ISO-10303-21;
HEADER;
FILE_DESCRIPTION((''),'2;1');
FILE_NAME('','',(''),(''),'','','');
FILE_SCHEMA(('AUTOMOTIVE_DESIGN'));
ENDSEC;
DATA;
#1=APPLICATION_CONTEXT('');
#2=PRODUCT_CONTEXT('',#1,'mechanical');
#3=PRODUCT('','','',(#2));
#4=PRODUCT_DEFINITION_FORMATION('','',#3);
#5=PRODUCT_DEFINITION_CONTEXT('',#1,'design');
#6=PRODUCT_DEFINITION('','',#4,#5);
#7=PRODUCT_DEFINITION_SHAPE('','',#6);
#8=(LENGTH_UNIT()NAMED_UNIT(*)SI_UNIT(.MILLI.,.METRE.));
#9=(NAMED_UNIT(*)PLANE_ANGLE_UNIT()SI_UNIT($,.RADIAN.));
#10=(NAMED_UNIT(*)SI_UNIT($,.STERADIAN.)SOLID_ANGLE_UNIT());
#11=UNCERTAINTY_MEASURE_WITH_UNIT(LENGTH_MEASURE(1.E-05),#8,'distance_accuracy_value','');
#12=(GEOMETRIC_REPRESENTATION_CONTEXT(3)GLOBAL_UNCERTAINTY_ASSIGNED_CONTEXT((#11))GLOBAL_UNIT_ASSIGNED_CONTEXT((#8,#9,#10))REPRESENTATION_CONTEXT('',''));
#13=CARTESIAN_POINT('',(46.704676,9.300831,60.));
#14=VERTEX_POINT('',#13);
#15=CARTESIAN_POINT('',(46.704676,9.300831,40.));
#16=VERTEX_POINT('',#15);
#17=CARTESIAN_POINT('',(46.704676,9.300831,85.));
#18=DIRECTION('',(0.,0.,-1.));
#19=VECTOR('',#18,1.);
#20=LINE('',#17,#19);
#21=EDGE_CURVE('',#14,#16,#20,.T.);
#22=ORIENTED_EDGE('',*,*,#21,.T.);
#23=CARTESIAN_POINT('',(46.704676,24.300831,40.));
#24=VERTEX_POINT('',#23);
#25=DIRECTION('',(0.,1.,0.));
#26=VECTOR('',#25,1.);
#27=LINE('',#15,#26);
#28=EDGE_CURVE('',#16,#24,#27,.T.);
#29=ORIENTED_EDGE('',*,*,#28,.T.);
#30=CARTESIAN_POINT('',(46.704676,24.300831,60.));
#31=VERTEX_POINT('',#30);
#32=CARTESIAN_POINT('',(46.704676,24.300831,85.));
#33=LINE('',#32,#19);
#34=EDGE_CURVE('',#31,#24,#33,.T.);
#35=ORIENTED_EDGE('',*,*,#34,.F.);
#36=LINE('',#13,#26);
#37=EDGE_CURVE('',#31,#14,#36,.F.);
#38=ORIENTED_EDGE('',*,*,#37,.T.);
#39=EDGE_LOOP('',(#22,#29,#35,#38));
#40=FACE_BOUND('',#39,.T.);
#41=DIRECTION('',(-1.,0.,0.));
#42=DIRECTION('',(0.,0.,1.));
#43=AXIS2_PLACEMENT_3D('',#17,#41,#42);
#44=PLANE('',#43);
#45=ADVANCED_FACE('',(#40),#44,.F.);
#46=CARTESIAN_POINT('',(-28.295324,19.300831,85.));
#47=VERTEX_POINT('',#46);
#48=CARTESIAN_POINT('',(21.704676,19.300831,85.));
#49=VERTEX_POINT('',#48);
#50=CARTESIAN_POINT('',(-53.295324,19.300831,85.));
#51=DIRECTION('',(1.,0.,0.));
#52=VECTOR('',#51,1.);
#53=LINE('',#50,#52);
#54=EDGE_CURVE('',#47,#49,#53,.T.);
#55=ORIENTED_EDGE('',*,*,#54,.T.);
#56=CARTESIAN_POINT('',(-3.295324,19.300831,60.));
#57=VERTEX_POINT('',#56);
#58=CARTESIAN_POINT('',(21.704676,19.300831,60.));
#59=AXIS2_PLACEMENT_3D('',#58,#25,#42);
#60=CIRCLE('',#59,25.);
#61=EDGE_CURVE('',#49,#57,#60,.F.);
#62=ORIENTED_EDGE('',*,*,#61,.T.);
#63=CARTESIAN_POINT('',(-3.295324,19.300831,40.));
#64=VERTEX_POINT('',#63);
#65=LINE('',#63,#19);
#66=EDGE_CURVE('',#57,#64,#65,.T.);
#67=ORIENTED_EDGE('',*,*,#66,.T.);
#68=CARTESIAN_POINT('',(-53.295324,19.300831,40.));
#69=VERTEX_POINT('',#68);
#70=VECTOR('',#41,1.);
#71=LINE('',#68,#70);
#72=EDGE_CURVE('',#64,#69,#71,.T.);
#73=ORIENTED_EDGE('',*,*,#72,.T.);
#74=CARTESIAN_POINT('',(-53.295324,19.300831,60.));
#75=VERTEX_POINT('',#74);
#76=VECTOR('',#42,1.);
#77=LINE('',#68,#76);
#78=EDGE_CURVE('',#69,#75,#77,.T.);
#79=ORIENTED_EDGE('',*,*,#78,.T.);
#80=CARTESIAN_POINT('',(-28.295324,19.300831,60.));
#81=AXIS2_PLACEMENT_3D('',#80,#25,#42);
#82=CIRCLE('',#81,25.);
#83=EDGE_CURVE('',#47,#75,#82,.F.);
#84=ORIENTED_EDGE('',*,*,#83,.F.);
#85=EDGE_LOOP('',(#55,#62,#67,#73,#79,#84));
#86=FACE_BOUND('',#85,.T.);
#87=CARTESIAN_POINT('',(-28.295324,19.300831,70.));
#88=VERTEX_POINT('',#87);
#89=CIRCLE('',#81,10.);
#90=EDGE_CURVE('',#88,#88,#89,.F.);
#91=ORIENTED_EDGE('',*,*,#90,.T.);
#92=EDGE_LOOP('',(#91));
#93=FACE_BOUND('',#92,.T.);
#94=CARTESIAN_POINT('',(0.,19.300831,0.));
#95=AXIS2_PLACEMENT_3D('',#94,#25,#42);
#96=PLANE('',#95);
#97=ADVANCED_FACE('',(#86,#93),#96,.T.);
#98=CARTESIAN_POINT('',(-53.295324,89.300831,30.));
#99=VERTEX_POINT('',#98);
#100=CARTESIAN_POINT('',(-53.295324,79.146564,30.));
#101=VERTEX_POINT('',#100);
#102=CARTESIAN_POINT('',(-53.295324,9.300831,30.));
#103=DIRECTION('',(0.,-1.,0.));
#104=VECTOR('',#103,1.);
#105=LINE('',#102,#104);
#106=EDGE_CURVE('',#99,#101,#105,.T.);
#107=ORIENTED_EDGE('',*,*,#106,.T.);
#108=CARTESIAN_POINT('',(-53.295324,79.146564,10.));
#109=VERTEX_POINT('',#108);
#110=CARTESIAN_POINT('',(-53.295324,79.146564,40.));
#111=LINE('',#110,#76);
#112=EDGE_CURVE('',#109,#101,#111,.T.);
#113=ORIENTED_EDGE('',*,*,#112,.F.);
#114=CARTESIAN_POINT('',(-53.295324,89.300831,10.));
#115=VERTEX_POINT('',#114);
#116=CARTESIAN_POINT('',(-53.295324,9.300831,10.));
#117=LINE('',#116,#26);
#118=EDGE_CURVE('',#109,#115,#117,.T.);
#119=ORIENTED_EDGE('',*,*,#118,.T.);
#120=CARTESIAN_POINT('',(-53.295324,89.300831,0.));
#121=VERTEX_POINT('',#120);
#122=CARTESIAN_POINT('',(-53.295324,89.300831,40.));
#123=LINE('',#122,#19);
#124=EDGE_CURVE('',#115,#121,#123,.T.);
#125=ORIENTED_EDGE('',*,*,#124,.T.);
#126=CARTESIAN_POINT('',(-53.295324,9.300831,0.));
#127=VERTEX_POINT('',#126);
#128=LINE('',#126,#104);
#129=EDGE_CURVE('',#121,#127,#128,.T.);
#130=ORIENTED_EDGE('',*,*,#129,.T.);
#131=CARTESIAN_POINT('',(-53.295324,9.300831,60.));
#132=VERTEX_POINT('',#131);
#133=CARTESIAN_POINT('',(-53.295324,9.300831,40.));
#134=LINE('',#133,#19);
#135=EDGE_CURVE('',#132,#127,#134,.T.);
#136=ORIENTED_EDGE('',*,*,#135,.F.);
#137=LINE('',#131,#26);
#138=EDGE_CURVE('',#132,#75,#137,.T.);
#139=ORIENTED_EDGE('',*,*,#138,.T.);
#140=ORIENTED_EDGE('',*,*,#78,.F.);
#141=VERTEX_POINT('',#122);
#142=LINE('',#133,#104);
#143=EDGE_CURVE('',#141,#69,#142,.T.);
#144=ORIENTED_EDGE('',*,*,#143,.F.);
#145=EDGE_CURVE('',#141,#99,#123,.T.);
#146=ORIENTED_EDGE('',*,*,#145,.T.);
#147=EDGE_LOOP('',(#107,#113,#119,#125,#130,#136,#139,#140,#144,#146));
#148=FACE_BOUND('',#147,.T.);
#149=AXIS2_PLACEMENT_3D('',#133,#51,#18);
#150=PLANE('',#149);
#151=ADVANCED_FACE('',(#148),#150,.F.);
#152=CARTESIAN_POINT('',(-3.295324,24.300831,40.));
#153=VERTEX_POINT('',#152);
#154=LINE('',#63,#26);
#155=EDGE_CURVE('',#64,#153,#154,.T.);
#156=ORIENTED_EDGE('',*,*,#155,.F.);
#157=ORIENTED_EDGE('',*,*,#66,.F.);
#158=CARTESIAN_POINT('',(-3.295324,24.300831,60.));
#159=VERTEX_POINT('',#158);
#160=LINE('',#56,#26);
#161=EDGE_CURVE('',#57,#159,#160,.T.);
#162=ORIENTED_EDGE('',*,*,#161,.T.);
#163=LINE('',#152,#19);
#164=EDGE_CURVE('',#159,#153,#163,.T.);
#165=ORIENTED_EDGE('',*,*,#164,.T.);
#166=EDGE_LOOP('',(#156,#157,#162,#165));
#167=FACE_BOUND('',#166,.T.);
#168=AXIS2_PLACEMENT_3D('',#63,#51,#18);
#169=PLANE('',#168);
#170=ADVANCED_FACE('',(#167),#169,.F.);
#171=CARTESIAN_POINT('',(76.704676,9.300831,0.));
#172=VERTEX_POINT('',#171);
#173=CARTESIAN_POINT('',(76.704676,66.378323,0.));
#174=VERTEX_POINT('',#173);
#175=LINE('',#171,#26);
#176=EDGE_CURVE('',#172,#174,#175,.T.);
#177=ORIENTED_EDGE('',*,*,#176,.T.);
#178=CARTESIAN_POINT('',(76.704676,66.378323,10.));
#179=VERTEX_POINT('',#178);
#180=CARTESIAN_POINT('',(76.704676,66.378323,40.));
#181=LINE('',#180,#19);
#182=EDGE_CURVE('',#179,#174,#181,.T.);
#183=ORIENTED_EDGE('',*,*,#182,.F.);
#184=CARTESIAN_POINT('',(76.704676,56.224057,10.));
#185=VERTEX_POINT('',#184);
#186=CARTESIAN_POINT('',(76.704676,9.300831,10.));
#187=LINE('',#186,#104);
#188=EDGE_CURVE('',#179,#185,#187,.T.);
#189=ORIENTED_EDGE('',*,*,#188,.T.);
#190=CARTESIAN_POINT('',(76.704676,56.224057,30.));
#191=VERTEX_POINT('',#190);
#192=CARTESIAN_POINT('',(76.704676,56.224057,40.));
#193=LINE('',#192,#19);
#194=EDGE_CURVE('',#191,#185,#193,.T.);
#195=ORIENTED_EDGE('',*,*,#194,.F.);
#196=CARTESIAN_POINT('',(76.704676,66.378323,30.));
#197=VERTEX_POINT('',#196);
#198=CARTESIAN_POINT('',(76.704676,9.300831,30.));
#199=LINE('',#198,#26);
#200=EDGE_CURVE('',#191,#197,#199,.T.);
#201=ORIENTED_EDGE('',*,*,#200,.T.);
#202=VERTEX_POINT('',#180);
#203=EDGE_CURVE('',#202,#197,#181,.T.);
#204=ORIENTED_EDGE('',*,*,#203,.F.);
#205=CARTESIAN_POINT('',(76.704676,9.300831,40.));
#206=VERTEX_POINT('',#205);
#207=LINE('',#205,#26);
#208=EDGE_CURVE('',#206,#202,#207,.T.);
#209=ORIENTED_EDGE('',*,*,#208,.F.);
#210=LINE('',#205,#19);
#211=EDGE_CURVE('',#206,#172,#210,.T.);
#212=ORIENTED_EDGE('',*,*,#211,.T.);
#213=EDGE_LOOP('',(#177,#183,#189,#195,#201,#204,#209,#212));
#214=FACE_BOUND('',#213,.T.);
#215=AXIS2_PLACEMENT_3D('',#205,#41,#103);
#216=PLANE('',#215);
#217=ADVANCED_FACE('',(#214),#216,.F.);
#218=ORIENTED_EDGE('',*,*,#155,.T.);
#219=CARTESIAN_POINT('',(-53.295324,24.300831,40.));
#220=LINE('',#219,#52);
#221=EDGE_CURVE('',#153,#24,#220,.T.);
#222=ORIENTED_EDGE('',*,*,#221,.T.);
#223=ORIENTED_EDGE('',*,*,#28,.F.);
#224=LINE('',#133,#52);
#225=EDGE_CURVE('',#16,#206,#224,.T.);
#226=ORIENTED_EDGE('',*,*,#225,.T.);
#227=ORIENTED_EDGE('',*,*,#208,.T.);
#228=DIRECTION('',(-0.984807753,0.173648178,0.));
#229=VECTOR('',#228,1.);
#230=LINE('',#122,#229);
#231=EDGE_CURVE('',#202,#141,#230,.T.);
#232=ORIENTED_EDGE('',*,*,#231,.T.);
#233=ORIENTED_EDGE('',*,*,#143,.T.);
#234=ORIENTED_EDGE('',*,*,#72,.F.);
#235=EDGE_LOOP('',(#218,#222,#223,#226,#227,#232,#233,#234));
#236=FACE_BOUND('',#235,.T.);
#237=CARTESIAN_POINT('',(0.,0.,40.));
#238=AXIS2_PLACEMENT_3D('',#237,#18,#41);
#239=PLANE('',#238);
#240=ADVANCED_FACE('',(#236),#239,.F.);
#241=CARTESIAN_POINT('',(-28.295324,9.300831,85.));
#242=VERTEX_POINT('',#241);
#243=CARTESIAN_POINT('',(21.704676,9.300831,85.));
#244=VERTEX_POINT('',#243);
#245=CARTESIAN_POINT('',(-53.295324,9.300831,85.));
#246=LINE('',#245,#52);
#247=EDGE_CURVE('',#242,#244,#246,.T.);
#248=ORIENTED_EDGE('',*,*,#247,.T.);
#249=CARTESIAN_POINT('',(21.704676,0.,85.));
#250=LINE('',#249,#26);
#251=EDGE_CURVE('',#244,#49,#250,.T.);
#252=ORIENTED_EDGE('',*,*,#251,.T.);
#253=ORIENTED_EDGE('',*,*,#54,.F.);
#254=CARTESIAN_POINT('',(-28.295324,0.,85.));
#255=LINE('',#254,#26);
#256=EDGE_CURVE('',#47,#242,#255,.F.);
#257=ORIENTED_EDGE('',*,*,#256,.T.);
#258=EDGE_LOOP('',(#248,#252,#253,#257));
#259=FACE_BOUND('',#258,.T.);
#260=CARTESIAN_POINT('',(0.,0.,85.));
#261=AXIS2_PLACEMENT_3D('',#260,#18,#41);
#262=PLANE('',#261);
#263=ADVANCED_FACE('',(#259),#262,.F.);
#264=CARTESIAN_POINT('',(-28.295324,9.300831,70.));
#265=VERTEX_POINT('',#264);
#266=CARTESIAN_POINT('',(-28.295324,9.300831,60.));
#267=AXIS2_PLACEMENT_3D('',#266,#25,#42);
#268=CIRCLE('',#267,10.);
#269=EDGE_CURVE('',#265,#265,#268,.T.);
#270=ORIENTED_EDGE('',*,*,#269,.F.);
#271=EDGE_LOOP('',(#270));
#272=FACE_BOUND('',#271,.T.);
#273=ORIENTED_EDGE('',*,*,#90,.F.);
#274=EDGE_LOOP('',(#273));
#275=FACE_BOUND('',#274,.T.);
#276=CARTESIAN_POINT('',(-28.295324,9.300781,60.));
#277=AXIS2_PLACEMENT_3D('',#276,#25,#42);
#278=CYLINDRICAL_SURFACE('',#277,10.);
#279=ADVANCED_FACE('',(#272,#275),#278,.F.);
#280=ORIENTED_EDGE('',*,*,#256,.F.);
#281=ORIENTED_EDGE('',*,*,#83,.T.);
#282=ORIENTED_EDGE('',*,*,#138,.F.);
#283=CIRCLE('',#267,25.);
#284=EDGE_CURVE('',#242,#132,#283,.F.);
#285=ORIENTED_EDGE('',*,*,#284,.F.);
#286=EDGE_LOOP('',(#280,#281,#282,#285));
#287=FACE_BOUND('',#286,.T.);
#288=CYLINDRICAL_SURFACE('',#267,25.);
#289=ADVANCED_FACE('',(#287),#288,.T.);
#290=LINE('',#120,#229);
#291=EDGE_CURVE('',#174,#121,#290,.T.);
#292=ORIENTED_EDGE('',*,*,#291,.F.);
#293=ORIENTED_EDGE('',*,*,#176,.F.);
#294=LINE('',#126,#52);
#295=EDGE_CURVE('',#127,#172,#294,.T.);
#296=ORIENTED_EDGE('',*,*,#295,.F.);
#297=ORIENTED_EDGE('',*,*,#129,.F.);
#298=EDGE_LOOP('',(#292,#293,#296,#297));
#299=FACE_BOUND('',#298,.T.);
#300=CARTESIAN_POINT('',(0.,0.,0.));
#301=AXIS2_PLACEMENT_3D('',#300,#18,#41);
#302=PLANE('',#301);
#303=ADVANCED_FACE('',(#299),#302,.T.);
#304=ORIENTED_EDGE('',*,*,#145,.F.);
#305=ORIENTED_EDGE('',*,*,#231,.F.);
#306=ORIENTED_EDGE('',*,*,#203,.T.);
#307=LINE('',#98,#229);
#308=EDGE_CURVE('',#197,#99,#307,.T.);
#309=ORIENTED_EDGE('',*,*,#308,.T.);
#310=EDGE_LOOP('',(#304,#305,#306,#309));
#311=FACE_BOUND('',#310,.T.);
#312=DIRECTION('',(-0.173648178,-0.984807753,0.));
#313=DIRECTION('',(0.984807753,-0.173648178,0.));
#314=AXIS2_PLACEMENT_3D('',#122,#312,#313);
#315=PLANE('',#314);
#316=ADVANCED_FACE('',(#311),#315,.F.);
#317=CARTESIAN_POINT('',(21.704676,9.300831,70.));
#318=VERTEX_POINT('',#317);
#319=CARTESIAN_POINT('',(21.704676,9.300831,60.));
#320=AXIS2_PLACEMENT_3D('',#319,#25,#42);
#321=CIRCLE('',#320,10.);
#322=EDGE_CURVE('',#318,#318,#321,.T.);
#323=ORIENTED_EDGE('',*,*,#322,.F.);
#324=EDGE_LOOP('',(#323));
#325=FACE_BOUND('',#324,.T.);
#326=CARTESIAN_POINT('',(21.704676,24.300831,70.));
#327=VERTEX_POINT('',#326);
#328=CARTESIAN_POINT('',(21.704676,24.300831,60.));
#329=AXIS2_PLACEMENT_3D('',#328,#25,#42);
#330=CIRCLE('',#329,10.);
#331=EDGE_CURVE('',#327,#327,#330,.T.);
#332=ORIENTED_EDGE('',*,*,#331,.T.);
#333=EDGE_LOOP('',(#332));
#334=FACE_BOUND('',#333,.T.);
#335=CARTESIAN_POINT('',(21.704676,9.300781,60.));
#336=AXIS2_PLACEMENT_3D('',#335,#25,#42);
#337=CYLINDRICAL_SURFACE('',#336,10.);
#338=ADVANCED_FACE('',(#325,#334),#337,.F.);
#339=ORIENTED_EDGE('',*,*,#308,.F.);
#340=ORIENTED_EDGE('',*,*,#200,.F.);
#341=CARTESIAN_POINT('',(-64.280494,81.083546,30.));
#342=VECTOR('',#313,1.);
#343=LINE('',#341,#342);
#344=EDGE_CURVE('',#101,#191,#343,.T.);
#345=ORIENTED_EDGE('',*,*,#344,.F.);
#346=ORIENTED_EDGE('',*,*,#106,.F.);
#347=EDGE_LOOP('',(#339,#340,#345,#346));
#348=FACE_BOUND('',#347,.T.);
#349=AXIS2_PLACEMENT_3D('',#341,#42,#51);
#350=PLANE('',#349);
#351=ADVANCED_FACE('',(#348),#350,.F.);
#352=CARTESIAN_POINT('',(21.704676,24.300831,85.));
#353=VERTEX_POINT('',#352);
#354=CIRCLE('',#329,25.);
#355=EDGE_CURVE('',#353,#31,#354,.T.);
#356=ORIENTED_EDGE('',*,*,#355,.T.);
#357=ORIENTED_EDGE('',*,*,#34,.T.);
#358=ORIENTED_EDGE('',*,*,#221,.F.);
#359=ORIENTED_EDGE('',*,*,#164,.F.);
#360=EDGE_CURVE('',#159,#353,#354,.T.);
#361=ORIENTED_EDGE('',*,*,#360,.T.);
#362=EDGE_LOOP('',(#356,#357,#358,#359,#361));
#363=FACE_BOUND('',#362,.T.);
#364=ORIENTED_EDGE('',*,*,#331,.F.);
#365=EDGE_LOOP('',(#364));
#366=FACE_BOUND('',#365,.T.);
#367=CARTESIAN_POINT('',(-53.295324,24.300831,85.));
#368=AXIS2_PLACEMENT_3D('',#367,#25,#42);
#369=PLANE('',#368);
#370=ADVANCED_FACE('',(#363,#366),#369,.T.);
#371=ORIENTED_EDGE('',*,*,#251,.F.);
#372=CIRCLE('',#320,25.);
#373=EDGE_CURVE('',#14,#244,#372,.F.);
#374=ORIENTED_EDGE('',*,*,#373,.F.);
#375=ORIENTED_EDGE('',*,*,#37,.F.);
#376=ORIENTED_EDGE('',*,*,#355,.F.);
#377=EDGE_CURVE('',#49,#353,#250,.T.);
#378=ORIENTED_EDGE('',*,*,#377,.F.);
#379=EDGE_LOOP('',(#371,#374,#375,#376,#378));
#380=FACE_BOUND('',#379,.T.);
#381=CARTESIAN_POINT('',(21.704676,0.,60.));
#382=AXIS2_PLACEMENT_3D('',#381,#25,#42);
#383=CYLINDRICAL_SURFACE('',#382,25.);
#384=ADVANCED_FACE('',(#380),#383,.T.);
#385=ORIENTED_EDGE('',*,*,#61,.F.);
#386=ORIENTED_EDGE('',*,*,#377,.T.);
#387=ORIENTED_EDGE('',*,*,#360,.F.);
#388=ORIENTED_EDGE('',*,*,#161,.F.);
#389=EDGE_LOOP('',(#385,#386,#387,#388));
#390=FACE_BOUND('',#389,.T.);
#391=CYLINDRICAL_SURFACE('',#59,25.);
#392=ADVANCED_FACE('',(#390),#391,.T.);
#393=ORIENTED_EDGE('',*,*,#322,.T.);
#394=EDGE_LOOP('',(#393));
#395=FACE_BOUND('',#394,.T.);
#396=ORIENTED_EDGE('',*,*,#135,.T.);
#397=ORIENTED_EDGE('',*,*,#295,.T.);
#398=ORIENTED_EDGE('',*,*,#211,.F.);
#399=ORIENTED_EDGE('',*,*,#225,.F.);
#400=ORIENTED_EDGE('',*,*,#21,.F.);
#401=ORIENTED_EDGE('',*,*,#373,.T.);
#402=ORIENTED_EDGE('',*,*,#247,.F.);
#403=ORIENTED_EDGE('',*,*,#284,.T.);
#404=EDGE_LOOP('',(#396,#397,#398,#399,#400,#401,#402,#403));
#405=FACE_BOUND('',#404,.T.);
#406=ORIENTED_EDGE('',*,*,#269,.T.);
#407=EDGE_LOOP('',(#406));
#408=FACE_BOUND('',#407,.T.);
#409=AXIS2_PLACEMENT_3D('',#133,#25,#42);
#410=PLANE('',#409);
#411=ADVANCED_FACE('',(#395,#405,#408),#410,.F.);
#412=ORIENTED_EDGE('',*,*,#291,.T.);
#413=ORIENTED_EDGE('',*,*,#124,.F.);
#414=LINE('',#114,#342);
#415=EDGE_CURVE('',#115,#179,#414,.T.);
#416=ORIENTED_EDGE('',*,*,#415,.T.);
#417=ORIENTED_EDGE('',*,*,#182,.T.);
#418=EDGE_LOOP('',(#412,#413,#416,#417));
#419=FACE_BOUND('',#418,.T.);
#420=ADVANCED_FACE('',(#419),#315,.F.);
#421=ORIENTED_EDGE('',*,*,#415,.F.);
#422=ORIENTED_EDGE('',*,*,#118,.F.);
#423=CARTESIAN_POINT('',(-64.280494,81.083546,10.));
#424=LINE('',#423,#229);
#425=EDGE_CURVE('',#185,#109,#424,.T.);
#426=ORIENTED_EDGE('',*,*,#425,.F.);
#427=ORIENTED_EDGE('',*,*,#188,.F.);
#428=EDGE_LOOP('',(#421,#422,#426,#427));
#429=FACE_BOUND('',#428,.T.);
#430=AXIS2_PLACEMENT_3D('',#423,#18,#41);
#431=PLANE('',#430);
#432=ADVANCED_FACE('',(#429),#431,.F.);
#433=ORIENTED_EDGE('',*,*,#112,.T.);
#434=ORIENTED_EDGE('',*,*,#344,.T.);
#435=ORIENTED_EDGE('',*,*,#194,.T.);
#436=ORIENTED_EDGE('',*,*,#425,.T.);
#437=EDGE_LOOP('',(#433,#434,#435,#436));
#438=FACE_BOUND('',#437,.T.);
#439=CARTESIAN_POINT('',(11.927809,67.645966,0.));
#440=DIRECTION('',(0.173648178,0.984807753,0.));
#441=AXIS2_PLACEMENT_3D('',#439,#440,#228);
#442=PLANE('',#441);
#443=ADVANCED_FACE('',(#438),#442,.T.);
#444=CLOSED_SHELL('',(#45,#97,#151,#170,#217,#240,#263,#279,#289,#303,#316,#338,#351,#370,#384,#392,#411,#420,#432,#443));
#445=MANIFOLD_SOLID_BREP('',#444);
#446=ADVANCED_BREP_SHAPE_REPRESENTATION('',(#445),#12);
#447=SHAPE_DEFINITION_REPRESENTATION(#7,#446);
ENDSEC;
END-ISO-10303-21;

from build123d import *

# Parameters (mm, degrees)
RESSALTO_EXTRUS_O1_DEPTH = 40
ESBO_O4_W                = 171.630568717
ESBO_O4_H                = 20
CORTE_EXTRUS_O3_DEPTH    = 10
ESBO_O5_W                = 100
ESBO_O5_H                = 15
RESSALTO_EXTRUS_O2_DEPTH = 45
ESBO_O6_R                = 10
CORTE_EXTRUS_O6_DEPTH    = 132.657158163
FILETE8_R                = 25
FILETE7_R                = 25
ESBO_O9_W                = 50
ESBO_O9_H                = 45
CORTE_EXTRUS_O7_DEPTH    = 5
FILETE9_R                = 25


with BuildPart() as part:
    # Esboço1 → Ressalto-extrusão1 (new body)
    with BuildSketch(Plane.XY):
        Polygon((-53.29532416, 9.300830565), (76.70467584, 9.300830565), (76.70467584, 66.378323073), (-53.29532416, 89.300830565), align=None)
    extrude(amount=RESSALTO_EXTRUS_O1_DEPTH)

    # Esboço4 → Corte-extrusão3 (cut)
    with BuildSketch(Plane(origin=(13.664290772, 77.494043834, 0), x_dir=(0.9848077530122075, -0.17364817766693377, 0), z_dir=(0.1736481776669338, 0.9848077530122076, 0))):
        with Locations((8.431345703, -20)):
            Rectangle(ESBO_O4_W, ESBO_O4_H)
    extrude(amount=-CORTE_EXTRUS_O3_DEPTH, mode=Mode.SUBTRACT)

    # Esboço5 → Ressalto-extrusão2 (add)
    with BuildSketch(Plane.XY.offset(40)):
        with Locations((-3.29532416, 16.800830565)):
            Rectangle(ESBO_O5_W, ESBO_O5_H)
    extrude(amount=RESSALTO_EXTRUS_O2_DEPTH)

    # Esboço6 → Corte-extrusão6 (cut, through all)
    with BuildSketch(Plane(origin=(0, 24.300830565, 0), x_dir=(1, 0, 0), z_dir=(0, 1, 0))):
        with Locations(Location((-28.29532416, -60, 0), (0, 0, 270))):
            Circle(ESBO_O6_R)
        with Locations(Location((21.70467584, -60, 0), (0, 0, 270))):
            Circle(ESBO_O6_R)
    extrude(amount=-CORTE_EXTRUS_O6_DEPTH, mode=Mode.SUBTRACT)

    # Filete8
    filete8_edges = [part.edges().sort_by_distance(p)[0] for p in [
        (46.70467584, 16.800830565, 85),
    ]]
    fillet(filete8_edges, radius=FILETE8_R)

    # Filete7
    filete7_edges = [part.edges().sort_by_distance(p)[0] for p in [
        (-53.29532416, 16.800830565, 85),
    ]]
    fillet(filete7_edges, radius=FILETE7_R)

    # Esboço9 → Corte-extrusão7 (cut)
    with BuildSketch(Plane(origin=(0, 24.300830565, 0), x_dir=(1, 0, 0), z_dir=(0, 1, 0))):
        with Locations((-28.29532416, -62.5)):
            Rectangle(ESBO_O9_W, ESBO_O9_H)
    extrude(amount=-CORTE_EXTRUS_O7_DEPTH, mode=Mode.SUBTRACT)

    # Filete9
    filete9_edges = [part.edges().sort_by_distance(p)[0] for p in [
        (-3.29532416, 21.800830565, 85),
    ]]
    fillet(filete9_edges, radius=FILETE9_R - 0.0001)  # a hair under: the kernel refuses the full size


solid = part.part
